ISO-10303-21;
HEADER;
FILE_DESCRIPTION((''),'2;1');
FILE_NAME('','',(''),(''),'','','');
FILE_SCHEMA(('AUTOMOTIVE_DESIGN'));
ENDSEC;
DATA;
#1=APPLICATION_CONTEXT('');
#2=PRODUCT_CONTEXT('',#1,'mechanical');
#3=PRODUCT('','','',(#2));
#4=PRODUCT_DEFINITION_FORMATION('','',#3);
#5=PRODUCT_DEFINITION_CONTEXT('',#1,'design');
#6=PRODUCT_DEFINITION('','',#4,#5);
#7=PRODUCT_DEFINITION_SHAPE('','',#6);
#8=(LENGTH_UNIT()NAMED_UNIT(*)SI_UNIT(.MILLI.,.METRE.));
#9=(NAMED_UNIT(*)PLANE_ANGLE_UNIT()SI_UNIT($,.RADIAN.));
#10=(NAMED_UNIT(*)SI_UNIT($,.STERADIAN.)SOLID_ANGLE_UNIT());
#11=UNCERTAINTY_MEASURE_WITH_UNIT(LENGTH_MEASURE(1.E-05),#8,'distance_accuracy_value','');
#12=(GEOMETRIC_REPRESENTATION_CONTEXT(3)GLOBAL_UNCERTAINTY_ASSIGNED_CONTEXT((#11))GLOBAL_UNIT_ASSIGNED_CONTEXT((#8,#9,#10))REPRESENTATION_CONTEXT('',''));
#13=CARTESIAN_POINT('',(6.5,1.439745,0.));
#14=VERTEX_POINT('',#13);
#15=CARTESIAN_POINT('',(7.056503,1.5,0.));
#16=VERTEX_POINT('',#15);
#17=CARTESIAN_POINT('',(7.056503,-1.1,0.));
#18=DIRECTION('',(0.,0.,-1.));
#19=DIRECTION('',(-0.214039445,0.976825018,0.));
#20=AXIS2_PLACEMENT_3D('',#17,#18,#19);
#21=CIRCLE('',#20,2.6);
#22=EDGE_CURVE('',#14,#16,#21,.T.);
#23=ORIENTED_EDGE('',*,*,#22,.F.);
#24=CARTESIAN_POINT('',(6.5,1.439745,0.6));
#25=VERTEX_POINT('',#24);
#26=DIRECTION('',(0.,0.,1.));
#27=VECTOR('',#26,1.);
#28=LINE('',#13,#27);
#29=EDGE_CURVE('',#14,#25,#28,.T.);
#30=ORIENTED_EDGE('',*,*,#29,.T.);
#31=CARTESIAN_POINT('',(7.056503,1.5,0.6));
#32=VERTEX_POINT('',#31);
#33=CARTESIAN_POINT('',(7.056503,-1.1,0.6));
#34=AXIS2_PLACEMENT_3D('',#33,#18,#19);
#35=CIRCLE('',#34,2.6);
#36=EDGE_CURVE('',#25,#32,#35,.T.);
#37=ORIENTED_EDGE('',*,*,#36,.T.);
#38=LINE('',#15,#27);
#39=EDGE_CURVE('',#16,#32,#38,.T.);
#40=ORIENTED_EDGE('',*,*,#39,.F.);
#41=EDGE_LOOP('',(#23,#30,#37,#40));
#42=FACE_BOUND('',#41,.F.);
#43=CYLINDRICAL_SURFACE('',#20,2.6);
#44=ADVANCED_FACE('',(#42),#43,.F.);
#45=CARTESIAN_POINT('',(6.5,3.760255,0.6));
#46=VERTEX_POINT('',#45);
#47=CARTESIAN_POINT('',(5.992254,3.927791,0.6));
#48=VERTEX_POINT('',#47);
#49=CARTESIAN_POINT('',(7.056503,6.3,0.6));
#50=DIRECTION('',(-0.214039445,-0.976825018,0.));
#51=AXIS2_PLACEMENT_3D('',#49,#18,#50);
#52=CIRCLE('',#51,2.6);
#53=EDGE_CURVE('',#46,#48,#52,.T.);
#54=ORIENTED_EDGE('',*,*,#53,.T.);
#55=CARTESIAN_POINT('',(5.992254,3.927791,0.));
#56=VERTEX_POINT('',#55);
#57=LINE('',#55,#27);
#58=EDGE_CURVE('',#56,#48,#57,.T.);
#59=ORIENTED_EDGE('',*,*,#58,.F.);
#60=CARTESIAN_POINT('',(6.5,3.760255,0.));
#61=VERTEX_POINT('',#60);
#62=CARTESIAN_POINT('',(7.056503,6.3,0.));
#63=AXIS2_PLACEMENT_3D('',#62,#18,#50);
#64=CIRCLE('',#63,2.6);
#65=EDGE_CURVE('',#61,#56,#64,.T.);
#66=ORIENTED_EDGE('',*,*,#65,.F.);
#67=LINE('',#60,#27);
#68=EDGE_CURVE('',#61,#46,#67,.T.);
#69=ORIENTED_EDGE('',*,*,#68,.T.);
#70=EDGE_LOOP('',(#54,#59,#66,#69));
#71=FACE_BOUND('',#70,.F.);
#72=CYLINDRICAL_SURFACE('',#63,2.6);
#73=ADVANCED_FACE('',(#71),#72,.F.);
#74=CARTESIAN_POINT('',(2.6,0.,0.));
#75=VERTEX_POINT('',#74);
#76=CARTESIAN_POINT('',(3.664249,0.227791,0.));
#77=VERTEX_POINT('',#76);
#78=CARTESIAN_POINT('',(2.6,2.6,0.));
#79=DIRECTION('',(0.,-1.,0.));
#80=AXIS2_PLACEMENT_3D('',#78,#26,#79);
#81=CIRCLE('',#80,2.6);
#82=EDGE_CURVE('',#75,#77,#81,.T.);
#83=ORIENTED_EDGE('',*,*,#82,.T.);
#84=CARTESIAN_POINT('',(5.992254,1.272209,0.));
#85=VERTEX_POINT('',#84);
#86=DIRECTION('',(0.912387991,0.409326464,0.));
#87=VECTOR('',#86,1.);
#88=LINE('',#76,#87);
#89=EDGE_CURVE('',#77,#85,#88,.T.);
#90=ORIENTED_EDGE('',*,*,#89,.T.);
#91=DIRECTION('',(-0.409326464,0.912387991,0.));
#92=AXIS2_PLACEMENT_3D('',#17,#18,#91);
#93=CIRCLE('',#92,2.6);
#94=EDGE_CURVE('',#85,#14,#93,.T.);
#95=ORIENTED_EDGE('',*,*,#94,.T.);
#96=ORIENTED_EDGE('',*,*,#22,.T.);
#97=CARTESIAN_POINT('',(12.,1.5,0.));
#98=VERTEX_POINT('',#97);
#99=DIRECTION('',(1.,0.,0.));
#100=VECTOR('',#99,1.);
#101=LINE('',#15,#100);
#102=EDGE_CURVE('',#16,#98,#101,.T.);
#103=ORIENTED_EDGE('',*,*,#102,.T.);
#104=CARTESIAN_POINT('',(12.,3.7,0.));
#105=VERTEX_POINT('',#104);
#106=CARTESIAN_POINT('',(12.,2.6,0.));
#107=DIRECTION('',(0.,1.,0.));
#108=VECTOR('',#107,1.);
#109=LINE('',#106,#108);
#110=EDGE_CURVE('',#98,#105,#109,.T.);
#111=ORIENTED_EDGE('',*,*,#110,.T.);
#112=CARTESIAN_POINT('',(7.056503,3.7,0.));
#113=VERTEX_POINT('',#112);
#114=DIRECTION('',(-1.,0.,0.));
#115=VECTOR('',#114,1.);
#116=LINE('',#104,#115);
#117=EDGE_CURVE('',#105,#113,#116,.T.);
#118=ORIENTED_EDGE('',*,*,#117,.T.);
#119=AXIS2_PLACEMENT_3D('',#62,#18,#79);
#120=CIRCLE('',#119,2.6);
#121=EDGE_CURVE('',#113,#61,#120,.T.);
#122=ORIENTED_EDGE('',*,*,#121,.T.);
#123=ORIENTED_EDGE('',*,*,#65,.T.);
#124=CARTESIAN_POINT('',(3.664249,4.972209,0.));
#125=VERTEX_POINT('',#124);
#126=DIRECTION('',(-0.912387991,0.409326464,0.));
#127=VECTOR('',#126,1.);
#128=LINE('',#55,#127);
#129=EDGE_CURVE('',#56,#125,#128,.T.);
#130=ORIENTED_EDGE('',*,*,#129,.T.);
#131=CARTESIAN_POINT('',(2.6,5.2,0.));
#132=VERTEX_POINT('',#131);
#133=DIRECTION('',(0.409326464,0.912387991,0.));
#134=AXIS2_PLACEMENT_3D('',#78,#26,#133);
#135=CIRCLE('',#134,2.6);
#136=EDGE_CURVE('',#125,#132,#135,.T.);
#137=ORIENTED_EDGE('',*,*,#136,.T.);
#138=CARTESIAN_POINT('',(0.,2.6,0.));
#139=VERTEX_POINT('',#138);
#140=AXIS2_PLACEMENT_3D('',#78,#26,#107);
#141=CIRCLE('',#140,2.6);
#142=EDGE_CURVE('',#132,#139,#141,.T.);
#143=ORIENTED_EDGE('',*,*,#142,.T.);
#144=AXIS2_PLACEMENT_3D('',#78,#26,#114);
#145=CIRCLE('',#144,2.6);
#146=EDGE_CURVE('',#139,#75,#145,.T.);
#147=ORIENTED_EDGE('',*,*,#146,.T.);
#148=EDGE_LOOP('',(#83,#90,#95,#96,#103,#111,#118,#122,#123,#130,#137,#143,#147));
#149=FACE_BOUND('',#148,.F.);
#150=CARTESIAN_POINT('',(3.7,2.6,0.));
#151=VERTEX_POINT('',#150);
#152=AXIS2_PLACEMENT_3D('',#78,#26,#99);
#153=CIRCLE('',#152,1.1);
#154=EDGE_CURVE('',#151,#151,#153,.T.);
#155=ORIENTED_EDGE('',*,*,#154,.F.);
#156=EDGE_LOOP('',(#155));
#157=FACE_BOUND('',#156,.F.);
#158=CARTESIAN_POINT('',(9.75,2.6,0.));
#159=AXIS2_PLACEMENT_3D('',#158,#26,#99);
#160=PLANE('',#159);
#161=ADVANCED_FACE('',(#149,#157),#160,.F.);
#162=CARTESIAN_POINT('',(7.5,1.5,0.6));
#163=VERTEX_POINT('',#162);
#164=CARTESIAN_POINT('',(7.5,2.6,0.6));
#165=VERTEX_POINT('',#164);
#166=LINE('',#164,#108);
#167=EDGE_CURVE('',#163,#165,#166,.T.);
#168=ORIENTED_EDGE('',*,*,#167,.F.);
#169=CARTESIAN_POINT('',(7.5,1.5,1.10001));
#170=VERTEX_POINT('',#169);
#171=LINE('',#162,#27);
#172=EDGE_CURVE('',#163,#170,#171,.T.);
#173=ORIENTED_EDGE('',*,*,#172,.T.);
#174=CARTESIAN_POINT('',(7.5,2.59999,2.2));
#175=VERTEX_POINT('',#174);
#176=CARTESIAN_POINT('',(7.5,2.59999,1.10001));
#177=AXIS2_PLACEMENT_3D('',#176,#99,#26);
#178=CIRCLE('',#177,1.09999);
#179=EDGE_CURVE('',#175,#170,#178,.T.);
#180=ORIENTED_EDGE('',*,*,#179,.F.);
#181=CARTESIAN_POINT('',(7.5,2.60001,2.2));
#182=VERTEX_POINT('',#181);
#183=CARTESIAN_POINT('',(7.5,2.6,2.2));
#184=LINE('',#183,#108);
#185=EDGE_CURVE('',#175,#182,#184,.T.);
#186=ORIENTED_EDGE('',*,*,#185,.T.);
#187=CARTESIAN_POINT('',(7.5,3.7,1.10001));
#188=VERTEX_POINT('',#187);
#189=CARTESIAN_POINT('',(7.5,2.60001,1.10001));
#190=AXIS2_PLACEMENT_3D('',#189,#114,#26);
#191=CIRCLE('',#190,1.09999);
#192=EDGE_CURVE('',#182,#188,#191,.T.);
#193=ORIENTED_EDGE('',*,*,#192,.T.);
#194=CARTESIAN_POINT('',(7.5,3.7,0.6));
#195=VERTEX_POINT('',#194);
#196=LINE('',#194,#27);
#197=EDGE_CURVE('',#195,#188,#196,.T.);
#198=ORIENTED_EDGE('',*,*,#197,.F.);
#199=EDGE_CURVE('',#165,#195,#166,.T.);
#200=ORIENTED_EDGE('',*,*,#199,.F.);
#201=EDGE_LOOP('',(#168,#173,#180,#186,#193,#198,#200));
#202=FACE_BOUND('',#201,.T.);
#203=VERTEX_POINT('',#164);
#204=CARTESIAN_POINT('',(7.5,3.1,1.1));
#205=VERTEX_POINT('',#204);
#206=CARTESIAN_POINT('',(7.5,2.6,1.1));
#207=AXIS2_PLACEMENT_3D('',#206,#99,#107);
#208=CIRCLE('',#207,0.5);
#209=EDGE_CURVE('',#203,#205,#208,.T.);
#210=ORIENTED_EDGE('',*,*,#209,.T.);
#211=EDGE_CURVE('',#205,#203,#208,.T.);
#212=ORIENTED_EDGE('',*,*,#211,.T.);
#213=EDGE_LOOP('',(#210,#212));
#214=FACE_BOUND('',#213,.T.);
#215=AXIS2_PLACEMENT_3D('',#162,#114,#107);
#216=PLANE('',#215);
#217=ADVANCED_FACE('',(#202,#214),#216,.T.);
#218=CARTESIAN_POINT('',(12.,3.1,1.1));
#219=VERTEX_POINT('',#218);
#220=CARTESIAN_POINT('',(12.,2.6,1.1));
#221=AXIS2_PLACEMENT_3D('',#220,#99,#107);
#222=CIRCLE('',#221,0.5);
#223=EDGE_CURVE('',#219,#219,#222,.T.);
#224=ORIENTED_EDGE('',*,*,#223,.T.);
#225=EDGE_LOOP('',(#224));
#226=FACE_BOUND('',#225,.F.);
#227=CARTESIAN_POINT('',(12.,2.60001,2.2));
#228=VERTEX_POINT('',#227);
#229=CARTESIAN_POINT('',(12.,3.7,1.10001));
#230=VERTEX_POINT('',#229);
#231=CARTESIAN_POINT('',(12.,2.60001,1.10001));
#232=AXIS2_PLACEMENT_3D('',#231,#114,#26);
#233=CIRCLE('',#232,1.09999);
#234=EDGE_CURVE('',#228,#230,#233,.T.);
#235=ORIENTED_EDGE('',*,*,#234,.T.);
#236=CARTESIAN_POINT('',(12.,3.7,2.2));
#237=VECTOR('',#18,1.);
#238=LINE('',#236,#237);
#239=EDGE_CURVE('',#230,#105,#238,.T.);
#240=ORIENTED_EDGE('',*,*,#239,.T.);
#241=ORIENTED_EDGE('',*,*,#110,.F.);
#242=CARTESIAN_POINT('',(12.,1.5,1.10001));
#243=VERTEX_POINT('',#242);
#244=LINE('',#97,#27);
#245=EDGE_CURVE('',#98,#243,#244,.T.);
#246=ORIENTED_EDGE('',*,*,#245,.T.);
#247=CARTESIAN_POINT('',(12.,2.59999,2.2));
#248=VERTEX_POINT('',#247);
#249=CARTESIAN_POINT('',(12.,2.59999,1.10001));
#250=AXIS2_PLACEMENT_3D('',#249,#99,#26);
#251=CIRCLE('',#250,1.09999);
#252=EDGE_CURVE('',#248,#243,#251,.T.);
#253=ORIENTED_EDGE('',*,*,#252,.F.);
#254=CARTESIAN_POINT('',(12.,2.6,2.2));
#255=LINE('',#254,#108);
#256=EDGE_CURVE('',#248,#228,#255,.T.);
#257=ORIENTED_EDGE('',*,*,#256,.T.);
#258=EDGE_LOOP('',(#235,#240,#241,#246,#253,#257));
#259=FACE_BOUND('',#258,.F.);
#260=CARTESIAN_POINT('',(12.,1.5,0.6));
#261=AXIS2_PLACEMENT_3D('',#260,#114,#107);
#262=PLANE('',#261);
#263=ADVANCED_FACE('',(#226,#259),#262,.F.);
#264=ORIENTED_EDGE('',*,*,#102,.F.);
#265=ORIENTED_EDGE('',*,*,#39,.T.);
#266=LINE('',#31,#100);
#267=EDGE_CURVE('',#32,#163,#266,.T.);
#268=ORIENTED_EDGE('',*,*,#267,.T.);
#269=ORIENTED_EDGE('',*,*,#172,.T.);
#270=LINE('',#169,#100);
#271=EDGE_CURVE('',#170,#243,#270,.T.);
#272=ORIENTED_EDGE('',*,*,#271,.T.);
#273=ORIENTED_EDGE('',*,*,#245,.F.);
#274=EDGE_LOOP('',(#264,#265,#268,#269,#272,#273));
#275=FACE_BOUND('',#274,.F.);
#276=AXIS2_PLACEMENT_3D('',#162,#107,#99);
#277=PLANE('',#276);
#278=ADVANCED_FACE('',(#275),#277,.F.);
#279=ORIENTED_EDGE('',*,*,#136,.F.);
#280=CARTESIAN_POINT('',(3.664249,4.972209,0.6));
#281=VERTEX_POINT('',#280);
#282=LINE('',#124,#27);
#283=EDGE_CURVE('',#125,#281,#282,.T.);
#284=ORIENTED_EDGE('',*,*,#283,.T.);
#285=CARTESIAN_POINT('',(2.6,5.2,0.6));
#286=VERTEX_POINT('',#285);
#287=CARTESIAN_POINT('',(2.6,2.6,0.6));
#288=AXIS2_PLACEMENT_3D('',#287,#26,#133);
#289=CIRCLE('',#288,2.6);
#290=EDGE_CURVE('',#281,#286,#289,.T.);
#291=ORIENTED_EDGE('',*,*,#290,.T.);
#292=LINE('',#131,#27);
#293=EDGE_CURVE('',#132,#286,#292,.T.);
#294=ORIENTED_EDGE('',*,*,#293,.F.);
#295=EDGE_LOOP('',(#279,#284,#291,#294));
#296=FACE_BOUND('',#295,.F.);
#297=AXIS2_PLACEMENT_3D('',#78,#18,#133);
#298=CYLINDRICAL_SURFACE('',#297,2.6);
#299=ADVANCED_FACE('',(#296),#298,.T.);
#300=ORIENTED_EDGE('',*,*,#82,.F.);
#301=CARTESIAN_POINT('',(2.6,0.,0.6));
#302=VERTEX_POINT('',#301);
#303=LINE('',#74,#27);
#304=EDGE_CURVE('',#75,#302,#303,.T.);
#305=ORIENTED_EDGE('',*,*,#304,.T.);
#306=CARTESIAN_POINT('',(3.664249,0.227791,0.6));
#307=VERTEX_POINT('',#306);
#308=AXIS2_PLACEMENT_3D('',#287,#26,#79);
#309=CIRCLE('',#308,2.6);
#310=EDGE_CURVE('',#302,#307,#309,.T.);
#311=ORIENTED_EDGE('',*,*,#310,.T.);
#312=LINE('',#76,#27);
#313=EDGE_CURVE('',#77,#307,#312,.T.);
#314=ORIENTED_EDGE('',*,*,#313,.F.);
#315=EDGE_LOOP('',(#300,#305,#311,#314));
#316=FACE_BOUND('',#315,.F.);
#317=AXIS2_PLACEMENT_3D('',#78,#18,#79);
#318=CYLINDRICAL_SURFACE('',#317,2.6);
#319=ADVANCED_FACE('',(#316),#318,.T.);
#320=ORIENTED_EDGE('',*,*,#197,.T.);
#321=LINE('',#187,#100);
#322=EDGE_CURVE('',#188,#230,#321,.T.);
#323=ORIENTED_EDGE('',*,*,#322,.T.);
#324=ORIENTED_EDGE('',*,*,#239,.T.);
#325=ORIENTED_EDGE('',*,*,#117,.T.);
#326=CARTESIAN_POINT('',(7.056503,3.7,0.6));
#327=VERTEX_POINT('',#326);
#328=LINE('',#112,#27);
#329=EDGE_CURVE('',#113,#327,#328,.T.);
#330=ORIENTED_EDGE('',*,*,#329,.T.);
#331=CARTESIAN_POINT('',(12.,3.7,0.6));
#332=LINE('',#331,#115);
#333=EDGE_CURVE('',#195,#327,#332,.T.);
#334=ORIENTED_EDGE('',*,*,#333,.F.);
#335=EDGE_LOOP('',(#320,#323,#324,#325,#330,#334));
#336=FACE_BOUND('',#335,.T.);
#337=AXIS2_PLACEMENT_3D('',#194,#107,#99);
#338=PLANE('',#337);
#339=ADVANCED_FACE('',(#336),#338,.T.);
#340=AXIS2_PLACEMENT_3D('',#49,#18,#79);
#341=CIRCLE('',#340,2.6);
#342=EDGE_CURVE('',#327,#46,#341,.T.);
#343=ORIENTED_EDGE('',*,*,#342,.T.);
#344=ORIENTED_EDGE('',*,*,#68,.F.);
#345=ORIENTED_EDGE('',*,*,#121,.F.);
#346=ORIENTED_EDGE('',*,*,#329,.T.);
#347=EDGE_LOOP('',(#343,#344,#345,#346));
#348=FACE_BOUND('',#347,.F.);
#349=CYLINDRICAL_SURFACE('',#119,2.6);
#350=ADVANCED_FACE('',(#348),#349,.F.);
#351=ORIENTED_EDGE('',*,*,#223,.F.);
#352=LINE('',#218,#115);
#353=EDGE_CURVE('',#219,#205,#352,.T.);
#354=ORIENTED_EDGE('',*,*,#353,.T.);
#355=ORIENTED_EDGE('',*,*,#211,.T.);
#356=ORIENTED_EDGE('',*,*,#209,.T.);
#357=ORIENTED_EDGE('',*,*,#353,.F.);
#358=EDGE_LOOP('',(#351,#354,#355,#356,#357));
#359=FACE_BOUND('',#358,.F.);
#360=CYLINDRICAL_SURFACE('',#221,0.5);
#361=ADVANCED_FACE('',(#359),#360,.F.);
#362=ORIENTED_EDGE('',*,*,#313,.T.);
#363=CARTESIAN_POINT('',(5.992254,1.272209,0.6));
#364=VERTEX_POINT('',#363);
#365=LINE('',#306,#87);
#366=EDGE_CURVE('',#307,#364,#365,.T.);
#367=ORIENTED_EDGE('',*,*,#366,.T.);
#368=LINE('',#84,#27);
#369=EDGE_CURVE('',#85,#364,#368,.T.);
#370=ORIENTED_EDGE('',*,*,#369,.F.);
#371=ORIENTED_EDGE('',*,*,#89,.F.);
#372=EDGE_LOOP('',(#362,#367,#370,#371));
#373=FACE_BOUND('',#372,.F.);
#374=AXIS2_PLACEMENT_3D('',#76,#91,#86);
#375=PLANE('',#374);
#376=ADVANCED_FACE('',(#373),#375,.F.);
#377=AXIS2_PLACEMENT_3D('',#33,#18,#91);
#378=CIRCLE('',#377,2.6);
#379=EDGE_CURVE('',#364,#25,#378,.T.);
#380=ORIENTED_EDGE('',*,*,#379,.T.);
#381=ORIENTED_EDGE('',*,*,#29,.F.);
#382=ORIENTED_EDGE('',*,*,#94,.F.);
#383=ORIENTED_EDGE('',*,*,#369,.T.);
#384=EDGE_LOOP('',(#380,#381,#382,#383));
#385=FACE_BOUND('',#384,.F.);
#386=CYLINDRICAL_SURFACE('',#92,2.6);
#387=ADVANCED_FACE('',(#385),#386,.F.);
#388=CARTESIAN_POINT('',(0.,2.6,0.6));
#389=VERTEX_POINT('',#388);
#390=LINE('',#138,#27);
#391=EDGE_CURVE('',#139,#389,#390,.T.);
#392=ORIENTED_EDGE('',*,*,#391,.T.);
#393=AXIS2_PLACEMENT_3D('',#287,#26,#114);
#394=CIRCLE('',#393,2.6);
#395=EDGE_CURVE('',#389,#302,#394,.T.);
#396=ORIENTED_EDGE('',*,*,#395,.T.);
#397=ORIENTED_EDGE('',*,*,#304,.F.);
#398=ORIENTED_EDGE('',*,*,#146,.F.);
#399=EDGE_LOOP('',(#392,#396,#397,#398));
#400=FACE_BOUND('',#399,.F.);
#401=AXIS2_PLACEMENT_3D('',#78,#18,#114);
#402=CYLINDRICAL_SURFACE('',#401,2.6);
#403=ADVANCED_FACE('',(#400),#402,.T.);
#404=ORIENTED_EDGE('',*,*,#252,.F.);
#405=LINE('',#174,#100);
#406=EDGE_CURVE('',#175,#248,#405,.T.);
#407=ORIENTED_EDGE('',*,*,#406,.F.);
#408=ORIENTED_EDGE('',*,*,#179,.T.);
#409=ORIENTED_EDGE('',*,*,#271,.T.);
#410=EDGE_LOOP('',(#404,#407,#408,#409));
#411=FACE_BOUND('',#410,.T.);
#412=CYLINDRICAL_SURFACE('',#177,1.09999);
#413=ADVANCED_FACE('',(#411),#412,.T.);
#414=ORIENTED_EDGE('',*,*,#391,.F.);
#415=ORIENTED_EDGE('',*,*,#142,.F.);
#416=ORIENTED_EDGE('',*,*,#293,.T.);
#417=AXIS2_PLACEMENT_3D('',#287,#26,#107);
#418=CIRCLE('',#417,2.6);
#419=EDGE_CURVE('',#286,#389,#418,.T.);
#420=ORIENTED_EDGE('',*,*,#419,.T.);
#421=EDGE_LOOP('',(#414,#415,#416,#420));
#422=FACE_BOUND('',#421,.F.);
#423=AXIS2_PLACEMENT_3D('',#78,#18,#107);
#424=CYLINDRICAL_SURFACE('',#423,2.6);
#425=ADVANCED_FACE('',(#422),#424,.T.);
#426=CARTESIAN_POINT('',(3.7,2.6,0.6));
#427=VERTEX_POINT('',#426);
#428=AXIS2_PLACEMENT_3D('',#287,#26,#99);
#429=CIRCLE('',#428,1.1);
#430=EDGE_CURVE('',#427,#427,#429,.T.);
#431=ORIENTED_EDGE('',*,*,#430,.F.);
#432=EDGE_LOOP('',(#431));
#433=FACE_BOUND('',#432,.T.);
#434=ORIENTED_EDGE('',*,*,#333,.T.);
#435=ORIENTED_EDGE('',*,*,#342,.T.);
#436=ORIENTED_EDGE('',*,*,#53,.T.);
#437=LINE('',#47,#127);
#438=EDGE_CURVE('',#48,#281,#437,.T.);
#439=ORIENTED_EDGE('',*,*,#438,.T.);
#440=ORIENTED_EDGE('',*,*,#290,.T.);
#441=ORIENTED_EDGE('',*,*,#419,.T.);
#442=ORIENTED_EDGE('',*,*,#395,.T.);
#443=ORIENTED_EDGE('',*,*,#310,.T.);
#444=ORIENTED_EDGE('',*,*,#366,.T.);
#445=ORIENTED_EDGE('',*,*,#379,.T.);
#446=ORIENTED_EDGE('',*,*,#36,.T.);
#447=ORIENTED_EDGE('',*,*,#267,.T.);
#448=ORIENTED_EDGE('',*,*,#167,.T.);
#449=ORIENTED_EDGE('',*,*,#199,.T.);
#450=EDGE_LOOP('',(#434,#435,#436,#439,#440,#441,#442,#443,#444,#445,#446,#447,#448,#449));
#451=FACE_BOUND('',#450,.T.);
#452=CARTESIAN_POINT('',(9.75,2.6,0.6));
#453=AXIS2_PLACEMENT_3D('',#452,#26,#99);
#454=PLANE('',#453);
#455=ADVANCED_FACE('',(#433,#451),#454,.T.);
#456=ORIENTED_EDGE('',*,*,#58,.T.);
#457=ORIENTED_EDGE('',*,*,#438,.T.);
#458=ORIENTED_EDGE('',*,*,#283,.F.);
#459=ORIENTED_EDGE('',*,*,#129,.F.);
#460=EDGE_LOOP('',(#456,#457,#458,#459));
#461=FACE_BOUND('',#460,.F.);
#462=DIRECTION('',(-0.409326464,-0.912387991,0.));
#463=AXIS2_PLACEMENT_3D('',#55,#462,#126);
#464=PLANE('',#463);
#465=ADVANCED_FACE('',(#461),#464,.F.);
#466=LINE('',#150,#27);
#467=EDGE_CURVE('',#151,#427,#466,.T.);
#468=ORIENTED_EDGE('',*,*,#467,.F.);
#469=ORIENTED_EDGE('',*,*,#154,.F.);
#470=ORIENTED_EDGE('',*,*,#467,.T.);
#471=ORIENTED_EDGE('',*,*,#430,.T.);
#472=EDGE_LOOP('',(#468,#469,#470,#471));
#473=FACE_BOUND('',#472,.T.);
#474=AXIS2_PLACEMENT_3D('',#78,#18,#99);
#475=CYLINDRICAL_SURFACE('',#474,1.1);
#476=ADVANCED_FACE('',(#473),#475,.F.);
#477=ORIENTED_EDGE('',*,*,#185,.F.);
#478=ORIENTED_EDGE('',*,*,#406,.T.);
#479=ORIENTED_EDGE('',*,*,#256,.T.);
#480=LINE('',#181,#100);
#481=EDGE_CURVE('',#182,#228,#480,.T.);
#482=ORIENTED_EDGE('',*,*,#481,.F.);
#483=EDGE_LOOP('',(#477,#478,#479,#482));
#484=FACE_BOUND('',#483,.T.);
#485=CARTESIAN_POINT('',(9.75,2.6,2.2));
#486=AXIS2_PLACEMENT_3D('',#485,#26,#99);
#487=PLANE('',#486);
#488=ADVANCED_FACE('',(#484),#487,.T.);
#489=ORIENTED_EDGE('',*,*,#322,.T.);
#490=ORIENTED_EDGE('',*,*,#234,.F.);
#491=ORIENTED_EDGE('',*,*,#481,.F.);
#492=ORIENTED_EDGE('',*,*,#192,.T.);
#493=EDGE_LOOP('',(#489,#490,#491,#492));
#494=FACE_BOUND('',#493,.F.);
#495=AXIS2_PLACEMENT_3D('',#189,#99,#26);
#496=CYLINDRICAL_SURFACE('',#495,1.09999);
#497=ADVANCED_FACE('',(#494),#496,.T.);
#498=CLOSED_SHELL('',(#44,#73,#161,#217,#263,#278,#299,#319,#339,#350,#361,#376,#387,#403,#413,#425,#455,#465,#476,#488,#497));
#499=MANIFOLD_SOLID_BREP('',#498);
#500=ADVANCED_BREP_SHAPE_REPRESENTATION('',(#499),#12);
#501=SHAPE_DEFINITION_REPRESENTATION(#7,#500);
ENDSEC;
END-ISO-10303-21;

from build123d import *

# Parameters (mm, degrees)
F0_W     = 4.5
F0_H     = 2.2
F0_R     = 1.1
F1_DEPTH = 0.6
F2_W     = 4.5
F2_H     = 2.2
F3_DEPTH = 1.6
F4_R     = 1.09999
F5_R     = 0.5
F6_DEPTH = 10


# Not quite as in the source:
# - a fillet or chamfer is up to 0.001 mm smaller than in the source, because OpenCascade refuses the exact size


with BuildPart() as f1:
    # F0 (on Top) → F1 (new body)
    with BuildSketch(Plane.XY):
        with Locations((9.75, 2.6)):
            Rectangle(F0_W, F0_H)
        with BuildLine():
            Line((7.0565025569, 1.5), (7.5, 1.5))
            Line((7.5, 1.5), (7.5, 3.7))
            Line((7.5, 3.7), (7.0565025569, 3.7))
            ThreePointArc((7.0565025569, 3.7), (6.7766250144, 3.7151076306), (6.5, 3.7602549529))
            ThreePointArc((6.5, 3.7602549529), (6.2418088438, 3.8309365837), (5.9922537502, 3.9277912239))
            Line((5.9922537502, 3.9277912239), (3.6642488067, 4.9722087761))
            ThreePointArc((3.6642488067, 4.9722087761), (3.1441769851, 5.1424144841), (2.6, 5.2))
            ThreePointArc((2.6, 5.2), (0.7615223689, 4.4384776311), (0, 2.6))
            ThreePointArc((0, 2.6), (0.7615223689, 0.7615223689), (2.6, 0))
            ThreePointArc((2.6, 0), (3.1441769851, 0.0575855159), (3.6642488067, 0.2277912239))
            Line((3.6642488067, 0.2277912239), (5.9922537502, 1.2722087761))
            ThreePointArc((5.9922537502, 1.2722087761), (6.2418088438, 1.3690634163), (6.5, 1.4397450471))
            ThreePointArc((6.5, 1.4397450471), (6.7766250144, 1.4848923694), (7.0565025569, 1.5))
        make_face()
        with Locations((2.6, 2.6)):
            Circle(F0_R, mode=Mode.SUBTRACT)
    extrude(amount=F1_DEPTH)

    # F2 (on face) → F3 (join)
    with BuildSketch(Plane.XY.offset(0.6)):
        with Locations((9.75, 2.6)):
            Rectangle(F2_W, F2_H)
    extrude(amount=F3_DEPTH)

    # F4 (radius 1.1 in the source; OpenCascade refuses exactly that, so slightly less here)
    f4_edges = [f1.edges().sort_by_distance(p)[0] for p in [
        (9.75, 1.5, 2.2),
        (9.75, 3.7, 2.2),
    ]]
    fillet(f4_edges, radius=F4_R)

    # F5 (on face) → F6 (cut)
    with BuildSketch(Plane.YZ.offset(12)):
        with Locations((2.6, 1.1)):
            Circle(F5_R)
    extrude(amount=-F6_DEPTH, mode=Mode.SUBTRACT)


solid = f1.part
